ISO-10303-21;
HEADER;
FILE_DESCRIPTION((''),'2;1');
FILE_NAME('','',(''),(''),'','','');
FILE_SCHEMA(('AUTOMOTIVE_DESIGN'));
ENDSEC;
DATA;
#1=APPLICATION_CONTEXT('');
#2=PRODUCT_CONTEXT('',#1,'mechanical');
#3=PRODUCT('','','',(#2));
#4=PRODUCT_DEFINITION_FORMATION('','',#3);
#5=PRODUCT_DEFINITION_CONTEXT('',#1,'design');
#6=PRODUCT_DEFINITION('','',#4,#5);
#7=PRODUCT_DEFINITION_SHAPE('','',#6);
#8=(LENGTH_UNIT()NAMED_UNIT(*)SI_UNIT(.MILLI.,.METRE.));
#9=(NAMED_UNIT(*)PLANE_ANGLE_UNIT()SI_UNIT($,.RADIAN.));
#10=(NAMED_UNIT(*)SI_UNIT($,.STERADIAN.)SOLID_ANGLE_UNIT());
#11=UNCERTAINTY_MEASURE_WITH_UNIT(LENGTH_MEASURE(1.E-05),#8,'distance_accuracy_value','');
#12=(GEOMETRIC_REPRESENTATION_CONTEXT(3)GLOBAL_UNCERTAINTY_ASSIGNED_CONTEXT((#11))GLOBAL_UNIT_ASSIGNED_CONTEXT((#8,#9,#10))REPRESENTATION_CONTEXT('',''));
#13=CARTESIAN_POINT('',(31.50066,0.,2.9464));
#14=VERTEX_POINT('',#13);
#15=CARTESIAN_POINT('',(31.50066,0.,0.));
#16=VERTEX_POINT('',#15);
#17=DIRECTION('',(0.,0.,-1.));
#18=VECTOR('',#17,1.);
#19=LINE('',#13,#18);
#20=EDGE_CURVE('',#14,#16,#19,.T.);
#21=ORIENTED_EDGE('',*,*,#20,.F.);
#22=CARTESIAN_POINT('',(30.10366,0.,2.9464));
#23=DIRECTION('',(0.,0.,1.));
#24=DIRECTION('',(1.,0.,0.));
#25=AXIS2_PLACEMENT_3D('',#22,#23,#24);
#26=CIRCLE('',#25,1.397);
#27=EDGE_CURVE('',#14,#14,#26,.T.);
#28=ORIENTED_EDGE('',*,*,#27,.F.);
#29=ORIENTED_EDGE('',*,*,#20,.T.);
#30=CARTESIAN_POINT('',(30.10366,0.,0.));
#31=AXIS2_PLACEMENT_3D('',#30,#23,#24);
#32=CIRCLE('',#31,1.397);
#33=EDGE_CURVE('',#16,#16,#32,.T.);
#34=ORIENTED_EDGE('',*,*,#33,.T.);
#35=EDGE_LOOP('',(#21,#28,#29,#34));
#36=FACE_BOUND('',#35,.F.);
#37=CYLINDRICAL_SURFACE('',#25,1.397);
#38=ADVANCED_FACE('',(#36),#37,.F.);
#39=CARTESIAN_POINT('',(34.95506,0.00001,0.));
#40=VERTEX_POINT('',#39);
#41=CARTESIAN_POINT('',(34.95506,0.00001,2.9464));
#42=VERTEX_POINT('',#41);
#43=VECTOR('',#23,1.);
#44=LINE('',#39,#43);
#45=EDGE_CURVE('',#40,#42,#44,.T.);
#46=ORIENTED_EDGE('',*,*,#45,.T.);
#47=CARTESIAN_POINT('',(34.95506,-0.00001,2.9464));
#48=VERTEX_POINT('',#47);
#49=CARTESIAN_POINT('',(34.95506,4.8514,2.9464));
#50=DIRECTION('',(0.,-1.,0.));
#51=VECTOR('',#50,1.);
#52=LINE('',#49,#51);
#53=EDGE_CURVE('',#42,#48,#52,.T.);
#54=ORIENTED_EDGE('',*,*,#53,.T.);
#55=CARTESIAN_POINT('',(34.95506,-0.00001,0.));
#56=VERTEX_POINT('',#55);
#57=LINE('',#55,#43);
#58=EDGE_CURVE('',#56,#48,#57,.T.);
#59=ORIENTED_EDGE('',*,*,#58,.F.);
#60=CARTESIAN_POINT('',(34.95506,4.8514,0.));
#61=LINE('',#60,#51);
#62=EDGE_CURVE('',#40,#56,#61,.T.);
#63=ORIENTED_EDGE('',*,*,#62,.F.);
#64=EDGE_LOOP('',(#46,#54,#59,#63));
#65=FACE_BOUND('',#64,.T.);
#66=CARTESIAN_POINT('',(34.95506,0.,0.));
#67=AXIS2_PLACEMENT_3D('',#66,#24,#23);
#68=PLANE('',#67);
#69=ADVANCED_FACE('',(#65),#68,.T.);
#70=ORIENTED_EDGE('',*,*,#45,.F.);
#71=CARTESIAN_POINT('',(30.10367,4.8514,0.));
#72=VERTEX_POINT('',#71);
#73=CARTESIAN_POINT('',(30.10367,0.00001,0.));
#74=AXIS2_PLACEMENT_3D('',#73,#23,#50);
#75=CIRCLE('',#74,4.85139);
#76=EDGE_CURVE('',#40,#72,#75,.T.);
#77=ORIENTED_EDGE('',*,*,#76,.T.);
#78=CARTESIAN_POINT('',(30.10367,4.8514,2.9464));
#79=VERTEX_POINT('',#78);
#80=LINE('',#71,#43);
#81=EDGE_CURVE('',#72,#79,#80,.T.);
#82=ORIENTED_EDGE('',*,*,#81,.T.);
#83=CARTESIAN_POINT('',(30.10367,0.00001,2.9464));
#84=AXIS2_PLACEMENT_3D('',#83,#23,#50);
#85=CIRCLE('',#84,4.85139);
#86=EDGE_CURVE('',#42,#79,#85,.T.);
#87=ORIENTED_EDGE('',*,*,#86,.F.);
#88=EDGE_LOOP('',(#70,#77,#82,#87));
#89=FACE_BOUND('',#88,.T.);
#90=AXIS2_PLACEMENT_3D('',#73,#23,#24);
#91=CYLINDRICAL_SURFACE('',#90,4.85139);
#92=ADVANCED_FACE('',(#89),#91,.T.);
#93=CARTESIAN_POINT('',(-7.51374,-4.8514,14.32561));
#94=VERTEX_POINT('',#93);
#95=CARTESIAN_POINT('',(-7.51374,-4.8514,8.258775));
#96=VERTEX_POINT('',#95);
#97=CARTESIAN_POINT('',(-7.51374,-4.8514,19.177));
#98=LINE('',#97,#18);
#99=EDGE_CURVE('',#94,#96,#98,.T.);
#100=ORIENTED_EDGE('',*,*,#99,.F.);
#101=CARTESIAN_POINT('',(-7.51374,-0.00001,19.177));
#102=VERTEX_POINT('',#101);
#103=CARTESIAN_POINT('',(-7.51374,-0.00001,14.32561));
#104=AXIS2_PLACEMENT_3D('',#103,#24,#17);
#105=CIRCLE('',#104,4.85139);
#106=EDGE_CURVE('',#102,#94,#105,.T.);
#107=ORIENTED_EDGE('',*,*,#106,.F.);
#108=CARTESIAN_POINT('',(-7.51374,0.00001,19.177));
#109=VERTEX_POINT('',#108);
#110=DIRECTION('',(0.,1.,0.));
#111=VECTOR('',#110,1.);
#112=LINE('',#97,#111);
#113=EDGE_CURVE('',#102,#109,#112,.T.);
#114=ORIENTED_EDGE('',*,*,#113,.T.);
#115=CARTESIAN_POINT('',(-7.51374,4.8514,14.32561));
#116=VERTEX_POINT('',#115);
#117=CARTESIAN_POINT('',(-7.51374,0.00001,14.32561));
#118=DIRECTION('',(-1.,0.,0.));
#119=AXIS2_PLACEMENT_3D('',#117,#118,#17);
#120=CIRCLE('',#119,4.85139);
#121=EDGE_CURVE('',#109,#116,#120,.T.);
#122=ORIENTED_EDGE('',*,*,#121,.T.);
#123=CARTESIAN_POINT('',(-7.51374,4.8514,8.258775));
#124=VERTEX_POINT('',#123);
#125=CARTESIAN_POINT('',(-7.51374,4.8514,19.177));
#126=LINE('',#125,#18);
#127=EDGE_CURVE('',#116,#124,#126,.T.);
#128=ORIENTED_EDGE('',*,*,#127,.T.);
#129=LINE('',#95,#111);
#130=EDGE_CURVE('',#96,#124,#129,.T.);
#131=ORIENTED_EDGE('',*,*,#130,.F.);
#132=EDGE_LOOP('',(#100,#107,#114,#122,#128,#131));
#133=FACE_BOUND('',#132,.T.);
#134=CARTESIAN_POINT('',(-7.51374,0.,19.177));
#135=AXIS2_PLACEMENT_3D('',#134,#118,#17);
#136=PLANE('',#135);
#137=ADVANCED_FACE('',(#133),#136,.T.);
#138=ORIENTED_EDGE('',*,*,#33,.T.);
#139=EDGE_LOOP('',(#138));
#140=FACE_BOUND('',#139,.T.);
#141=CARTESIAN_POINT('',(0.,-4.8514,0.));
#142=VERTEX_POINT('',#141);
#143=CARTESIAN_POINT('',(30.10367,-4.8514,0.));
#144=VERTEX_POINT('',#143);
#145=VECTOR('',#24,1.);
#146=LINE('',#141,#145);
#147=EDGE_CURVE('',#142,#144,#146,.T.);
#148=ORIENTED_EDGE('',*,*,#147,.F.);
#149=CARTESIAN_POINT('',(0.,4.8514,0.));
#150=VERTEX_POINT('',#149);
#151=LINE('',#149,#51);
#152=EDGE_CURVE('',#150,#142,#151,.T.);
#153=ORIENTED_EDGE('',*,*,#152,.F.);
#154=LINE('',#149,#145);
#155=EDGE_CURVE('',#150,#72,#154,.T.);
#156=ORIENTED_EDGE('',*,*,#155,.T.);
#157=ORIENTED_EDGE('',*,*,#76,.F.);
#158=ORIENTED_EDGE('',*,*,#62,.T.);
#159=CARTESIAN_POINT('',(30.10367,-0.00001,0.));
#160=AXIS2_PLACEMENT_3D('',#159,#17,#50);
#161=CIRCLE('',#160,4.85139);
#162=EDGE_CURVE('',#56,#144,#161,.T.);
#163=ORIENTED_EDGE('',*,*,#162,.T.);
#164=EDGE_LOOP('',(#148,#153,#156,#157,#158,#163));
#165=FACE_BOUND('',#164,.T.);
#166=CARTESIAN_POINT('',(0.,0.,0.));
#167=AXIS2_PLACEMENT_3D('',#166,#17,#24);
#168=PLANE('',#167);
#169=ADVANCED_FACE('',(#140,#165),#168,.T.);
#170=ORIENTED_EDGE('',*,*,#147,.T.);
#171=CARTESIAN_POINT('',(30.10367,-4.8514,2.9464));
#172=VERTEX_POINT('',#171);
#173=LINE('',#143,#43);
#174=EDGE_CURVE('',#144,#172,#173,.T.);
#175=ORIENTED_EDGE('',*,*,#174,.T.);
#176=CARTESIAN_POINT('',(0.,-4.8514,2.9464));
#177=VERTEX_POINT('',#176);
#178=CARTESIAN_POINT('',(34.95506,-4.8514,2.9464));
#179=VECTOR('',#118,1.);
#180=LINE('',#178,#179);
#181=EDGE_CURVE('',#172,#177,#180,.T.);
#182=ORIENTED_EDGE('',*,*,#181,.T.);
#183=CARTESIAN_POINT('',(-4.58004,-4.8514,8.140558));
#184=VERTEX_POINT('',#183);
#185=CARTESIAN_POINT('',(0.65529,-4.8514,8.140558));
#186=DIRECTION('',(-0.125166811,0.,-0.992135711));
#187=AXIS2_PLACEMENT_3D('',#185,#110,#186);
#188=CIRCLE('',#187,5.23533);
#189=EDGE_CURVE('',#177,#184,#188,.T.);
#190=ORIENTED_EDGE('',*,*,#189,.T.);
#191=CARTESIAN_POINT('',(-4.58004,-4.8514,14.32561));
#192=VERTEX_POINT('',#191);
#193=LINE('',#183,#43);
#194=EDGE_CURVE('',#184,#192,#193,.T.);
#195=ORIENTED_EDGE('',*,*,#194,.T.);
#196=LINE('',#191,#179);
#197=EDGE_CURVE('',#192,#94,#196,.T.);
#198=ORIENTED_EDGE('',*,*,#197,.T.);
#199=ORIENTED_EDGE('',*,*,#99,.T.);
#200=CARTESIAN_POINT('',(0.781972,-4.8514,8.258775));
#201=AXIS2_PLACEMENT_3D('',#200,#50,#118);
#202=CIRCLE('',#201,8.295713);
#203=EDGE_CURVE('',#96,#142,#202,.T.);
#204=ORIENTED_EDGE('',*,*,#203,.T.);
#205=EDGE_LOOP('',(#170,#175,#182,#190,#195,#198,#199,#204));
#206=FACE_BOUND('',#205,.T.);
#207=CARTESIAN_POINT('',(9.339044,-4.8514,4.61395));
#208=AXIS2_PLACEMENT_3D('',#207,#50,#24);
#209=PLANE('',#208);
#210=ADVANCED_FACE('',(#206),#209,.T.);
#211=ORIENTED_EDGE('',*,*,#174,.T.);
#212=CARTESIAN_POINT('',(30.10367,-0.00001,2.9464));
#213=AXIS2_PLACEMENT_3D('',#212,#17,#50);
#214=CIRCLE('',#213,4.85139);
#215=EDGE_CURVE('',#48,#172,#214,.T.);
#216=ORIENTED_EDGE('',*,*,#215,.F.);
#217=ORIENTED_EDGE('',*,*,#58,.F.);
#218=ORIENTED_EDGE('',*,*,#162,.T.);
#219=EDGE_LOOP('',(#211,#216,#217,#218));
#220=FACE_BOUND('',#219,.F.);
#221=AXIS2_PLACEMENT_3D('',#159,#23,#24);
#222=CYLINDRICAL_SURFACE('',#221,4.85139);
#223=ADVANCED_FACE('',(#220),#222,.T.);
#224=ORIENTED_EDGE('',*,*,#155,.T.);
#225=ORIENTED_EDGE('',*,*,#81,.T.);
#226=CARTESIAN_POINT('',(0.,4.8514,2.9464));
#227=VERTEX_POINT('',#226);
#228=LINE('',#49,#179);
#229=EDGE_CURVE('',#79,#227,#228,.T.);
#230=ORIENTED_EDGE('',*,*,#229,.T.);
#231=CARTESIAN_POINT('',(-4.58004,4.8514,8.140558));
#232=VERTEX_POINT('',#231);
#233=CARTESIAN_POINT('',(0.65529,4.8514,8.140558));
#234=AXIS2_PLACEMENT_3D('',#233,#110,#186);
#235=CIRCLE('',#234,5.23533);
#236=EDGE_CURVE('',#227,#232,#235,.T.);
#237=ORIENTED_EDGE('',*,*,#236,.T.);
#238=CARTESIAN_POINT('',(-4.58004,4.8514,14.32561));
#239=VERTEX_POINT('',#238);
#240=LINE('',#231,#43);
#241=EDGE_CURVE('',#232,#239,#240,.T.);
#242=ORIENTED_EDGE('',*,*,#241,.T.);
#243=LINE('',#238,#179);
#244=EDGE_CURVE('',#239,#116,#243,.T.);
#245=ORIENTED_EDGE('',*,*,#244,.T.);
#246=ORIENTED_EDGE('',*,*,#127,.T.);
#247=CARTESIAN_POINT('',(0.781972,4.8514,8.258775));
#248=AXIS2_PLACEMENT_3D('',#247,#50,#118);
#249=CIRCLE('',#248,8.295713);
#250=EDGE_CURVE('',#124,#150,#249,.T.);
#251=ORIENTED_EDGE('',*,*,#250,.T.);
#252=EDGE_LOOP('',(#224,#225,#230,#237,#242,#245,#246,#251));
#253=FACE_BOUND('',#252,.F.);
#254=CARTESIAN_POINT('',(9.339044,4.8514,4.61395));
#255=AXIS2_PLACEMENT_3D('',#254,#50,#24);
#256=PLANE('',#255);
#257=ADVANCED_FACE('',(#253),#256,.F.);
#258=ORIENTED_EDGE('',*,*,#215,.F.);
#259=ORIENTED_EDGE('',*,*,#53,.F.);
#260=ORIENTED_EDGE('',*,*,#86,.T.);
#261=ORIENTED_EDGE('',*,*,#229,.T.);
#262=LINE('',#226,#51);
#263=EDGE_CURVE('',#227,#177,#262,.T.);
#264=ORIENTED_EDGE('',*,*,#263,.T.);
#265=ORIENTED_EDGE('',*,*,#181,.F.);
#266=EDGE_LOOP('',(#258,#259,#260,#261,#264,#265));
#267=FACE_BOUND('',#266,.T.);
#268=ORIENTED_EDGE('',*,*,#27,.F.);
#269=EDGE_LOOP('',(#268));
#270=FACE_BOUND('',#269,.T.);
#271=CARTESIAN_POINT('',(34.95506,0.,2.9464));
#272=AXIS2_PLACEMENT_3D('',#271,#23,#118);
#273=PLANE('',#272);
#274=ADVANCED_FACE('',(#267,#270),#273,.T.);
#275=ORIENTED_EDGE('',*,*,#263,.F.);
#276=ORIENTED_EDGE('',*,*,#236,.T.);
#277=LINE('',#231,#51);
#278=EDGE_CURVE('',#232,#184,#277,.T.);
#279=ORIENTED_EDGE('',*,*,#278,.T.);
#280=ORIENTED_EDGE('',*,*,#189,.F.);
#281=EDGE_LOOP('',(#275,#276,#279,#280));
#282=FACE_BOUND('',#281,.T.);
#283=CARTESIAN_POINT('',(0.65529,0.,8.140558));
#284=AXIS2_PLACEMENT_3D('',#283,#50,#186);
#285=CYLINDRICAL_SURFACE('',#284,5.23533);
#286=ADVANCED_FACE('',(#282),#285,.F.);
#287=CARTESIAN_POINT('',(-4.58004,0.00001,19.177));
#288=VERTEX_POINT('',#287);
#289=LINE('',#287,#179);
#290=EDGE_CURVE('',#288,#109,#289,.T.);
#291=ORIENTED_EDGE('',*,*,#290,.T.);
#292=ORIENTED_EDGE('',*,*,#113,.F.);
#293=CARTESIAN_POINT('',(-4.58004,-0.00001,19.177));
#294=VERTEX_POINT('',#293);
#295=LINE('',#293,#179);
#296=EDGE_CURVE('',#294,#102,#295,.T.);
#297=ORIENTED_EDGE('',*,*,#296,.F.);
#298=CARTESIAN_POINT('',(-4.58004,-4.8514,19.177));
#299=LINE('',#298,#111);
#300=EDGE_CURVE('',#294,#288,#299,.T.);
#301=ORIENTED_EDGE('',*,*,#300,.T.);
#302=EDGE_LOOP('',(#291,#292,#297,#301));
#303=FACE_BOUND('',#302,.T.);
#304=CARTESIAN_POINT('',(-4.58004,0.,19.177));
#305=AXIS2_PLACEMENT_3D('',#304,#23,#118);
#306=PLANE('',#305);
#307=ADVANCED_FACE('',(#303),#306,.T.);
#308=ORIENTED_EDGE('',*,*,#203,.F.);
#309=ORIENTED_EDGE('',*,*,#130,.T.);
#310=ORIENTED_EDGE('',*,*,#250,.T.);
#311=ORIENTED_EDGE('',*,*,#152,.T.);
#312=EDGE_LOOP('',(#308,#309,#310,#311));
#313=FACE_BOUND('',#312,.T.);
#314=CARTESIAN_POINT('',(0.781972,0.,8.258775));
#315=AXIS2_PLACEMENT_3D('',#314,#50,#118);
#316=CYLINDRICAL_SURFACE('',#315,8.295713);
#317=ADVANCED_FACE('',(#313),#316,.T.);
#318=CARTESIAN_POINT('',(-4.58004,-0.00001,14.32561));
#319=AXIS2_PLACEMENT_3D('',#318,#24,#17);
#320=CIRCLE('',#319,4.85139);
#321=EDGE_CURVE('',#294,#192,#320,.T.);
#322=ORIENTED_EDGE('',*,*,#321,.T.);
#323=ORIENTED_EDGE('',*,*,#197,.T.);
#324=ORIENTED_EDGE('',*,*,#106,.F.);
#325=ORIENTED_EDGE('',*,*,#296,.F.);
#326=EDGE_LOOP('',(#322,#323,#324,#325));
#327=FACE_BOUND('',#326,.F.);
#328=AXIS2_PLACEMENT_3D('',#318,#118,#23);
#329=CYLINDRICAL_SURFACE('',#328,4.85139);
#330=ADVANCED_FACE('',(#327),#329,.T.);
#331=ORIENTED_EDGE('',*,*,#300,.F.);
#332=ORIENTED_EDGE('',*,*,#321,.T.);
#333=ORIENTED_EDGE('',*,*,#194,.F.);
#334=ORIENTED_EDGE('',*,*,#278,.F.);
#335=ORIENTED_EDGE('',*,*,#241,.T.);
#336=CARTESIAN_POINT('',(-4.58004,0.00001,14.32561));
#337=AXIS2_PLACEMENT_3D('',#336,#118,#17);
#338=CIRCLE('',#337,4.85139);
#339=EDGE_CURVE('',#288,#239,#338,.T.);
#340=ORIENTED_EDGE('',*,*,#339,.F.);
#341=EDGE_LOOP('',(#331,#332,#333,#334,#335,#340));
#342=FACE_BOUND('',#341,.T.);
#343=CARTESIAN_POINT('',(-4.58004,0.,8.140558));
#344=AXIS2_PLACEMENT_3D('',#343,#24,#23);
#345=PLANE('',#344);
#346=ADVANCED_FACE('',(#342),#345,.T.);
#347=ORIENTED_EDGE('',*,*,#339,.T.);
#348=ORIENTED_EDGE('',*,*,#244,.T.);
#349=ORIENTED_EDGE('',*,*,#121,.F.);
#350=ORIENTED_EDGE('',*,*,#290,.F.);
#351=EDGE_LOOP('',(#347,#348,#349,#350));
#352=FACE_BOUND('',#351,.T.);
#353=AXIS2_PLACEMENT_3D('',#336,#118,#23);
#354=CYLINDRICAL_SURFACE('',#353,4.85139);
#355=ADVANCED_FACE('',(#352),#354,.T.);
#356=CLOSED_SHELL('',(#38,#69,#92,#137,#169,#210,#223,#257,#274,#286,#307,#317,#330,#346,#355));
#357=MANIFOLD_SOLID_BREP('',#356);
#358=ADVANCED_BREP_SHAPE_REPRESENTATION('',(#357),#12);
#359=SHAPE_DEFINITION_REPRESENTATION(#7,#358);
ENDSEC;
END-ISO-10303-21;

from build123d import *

# Parameters (mm, degrees)
F2_DEPTH = 4.8514
F3_R     = 4.85139
F4_R     = 1.397
F5_DEPTH = 25.4


# Not quite as in the source:
# - a variable given as a bare number and used for a length is read in inches; the dataset says mm whatever the document's units were
# - a fillet or chamfer is up to 0.001 mm smaller than in the source, because OpenCascade refuses the exact size


with BuildPart() as f2:
    # F1 (on Front) → F2 (new body, symmetric)
    with BuildSketch(Plane.XZ):
        with BuildLine():
            ThreePointArc((-7.5137404391, 8.2587754484), (-5.3542263452, 2.6761311983), (0, 0))
            Line((0, 0), (34.9550595609, 0))
            Line((34.9550595609, 0), (34.9550595609, 2.9464))
            Line((34.9550595609, 2.9464), (0, 2.9464))
            ThreePointArc((0, 2.9464), (-3.271499032, 4.6780426472), (-4.5800404391, 8.1405578545))
            Line((-4.5800404391, 8.1405578545), (-4.5800404391, 19.177))
            Line((-4.5800404391, 19.177), (-7.5137404391, 19.177))
            Line((-7.5137404391, 19.177), (-7.5137404391, 8.2587754484))
        make_face()
    extrude(amount=F2_DEPTH, both=True)

    # F3 (radius 4.8514 in the source; OpenCascade refuses exactly that, so slightly less here)
    f3_edges = [f2.edges().sort_by_distance(p)[0] for p in [
        (34.95506, -4.8514, 1.4732),
        (34.95506, 4.8514, 1.4732),
        (-6.04689, -4.8514, 19.177),
        (-6.04689, 4.8514, 19.177),
    ]]
    fillet(f3_edges, radius=F3_R)

    # F4 (on face) → F5 (cut)
    with BuildSketch(Plane.XY.offset(2.9464)):
        with Locations((30.1036595609, 0)):
            Circle(F4_R)
    extrude(amount=-F5_DEPTH, mode=Mode.SUBTRACT)


solid = f2.part
